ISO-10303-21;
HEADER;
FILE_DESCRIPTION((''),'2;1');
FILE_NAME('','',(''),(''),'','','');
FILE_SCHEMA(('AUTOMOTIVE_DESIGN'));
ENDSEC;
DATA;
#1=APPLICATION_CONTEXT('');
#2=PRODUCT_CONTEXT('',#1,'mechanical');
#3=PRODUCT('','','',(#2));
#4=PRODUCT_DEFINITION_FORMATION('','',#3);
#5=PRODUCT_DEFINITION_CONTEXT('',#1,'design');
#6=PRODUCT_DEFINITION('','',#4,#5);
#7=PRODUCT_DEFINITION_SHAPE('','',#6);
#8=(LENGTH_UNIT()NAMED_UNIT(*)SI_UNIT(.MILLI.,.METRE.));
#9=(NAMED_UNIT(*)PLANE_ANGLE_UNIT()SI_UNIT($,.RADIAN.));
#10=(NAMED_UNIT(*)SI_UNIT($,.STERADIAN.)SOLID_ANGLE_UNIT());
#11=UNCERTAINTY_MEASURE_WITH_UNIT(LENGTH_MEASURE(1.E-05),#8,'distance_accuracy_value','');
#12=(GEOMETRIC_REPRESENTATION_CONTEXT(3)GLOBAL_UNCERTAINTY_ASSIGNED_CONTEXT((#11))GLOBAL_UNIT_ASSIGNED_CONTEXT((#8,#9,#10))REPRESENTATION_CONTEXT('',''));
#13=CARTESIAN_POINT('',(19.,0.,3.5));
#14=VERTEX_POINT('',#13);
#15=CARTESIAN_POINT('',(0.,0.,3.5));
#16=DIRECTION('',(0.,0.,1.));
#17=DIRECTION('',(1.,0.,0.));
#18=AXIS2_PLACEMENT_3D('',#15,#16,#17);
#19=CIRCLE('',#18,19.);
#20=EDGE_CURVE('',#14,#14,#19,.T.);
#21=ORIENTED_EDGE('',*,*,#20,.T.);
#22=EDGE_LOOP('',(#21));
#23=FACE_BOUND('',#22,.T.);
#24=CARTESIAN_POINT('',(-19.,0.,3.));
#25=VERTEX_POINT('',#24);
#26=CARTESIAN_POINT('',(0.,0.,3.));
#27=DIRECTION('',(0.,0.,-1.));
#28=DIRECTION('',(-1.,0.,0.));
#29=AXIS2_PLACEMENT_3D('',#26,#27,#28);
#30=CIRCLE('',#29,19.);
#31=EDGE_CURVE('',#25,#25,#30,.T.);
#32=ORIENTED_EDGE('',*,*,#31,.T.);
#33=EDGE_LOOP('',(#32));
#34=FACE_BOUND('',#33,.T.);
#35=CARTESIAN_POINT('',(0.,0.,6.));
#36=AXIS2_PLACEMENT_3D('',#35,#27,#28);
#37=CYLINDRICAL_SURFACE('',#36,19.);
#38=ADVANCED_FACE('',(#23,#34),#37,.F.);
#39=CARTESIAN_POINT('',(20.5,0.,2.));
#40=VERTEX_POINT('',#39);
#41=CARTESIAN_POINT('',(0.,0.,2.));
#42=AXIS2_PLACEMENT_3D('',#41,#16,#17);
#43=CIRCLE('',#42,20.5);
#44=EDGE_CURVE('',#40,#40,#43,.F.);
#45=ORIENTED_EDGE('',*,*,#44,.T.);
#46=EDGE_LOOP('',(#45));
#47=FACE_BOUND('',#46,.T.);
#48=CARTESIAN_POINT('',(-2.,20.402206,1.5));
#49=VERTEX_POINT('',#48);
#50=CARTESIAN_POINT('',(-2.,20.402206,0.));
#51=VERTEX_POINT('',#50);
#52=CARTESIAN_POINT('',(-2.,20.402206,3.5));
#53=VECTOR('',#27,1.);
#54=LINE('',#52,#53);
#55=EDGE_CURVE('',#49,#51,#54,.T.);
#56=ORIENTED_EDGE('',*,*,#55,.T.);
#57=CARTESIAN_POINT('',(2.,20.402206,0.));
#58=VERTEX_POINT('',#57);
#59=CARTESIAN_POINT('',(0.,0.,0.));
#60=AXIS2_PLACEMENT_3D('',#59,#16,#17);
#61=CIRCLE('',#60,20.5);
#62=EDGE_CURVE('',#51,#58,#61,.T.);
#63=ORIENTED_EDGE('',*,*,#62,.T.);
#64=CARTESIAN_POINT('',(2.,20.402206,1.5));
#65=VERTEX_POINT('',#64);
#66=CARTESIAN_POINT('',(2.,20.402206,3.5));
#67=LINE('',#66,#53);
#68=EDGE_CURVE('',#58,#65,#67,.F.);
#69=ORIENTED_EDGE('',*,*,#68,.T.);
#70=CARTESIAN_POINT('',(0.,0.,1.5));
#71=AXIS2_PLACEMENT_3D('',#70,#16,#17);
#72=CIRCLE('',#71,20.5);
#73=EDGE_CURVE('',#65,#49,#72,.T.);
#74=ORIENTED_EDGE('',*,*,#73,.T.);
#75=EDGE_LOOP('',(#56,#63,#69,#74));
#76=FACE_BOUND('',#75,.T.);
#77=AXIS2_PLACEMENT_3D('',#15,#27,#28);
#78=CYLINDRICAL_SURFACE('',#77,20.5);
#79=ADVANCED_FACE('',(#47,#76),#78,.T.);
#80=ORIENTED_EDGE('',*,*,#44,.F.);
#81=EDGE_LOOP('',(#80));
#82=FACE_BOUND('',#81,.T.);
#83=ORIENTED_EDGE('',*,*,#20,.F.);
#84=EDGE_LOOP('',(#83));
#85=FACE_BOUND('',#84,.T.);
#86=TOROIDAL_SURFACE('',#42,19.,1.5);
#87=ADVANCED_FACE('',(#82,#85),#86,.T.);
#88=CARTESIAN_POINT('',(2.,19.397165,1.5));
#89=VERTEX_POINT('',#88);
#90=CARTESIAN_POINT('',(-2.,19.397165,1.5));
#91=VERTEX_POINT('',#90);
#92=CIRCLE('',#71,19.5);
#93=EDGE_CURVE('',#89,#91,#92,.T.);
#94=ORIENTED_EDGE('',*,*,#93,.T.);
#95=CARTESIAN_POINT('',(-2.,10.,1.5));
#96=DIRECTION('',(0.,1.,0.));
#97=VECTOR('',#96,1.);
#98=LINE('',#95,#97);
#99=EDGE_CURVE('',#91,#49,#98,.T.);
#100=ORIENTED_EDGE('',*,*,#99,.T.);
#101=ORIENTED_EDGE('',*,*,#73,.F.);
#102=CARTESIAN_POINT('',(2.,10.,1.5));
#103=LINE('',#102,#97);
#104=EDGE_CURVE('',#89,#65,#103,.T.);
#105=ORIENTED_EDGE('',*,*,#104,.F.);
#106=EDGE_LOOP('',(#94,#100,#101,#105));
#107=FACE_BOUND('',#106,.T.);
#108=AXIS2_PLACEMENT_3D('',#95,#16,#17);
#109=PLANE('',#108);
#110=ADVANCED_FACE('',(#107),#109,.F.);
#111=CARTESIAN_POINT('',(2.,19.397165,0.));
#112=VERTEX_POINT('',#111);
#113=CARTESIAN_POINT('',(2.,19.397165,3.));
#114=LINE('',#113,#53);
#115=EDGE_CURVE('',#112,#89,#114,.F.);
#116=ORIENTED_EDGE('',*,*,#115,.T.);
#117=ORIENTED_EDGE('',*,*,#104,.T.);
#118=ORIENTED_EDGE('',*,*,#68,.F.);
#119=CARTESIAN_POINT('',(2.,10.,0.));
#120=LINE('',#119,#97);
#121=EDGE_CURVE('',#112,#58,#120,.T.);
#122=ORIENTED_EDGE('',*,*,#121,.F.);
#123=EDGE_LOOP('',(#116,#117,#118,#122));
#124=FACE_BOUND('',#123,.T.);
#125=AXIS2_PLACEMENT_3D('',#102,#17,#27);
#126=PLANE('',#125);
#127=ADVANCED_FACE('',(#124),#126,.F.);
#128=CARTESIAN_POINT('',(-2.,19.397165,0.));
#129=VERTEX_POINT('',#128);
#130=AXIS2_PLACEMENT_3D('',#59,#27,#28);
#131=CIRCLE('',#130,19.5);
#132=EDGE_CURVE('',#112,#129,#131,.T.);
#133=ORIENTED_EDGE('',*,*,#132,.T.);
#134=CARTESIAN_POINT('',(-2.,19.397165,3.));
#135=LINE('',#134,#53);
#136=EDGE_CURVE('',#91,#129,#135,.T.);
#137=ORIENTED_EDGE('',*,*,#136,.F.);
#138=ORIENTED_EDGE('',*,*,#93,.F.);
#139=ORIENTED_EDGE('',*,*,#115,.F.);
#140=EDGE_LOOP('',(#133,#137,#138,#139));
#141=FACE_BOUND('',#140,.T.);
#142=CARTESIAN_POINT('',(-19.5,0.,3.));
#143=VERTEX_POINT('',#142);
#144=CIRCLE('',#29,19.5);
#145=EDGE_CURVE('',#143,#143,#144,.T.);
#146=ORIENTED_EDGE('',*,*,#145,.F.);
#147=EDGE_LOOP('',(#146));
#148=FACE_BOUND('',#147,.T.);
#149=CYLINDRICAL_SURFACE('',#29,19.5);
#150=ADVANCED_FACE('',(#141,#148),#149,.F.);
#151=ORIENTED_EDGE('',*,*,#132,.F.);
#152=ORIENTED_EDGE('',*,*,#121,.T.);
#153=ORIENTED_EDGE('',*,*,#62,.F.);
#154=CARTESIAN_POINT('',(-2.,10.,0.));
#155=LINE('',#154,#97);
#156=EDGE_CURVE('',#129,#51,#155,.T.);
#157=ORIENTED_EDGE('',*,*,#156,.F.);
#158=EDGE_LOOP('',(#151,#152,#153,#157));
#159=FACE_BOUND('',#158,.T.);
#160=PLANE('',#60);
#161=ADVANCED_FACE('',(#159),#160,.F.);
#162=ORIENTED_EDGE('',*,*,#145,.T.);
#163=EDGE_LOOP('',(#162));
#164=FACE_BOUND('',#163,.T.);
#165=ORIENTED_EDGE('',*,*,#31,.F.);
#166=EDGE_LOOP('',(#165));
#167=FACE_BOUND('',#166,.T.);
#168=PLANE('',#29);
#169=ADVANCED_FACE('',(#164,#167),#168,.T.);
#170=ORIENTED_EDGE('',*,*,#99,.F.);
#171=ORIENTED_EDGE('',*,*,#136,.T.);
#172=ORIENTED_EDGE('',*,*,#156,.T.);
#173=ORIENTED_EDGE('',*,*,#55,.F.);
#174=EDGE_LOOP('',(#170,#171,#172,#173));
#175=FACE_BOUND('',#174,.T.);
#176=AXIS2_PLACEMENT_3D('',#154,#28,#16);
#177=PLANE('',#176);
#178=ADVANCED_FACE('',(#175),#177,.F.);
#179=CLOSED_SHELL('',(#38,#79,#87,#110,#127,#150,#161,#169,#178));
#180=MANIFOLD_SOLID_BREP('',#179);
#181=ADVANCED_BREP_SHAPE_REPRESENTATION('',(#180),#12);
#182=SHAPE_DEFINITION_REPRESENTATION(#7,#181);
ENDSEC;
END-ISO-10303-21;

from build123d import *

# Parameters (mm, degrees)
CROQUIS1_R                 = 20.5
SALIENTE_EXTRUIR1_DEPTH    = 3.5
CORTAR_EXTRUIR2_DEPTH      = 3
CORTAR_EXTRUIR2_DEPTH_BACK = 10
CROQUIS3_W                 = 4
CROQUIS3_H                 = 1.5
CROQUIS4_R                 = 19.5
CORTAR_EXTRUIR3_DEPTH      = 3
CROQUIS5_R                 = 19
CORTAR_EXTRUIR4_DEPTH      = 3
REDONDEO1_R                = 1.5


with BuildPart() as part:
    # Croquis1 → Saliente-Extruir1 (new body)
    with BuildSketch(Plane.XY):
        Circle(CROQUIS1_R)
    extrude(amount=SALIENTE_EXTRUIR1_DEPTH)

    # Croquis3 → Cortar-Extruir2 (cut, two sides: drawn at the far end of the back side and taken through both)
    with BuildSketch(Plane(origin=(0, 20, 0), x_dir=(-1, 0, 0), z_dir=(0, 1, 0)).offset(-CORTAR_EXTRUIR2_DEPTH_BACK)):
        with Locations((0, 0.75)):
            Rectangle(CROQUIS3_W, CROQUIS3_H)
    extrude(amount=CORTAR_EXTRUIR2_DEPTH + CORTAR_EXTRUIR2_DEPTH_BACK, mode=Mode.SUBTRACT)

    # Croquis4 → Cortar-Extruir3 (cut)
    with BuildSketch(Plane(origin=(0, 0, 0), x_dir=(-1, 0, 0), z_dir=(0, 0, -1))):
        Circle(CROQUIS4_R)
    extrude(amount=-CORTAR_EXTRUIR3_DEPTH, mode=Mode.SUBTRACT)

    # Croquis5 → Cortar-Extruir4 (cut)
    with BuildSketch(Plane(origin=(0, 0, 3), x_dir=(-1, 0, 0), z_dir=(0, 0, -1))):
        Circle(CROQUIS5_R)
    extrude(amount=-CORTAR_EXTRUIR4_DEPTH, mode=Mode.SUBTRACT)

    # Redondeo1
    redondeo1_edges = [part.edges().sort_by_distance(p)[0] for p in [
        (-20.5, 0, 3.5),
    ]]
    fillet(redondeo1_edges, radius=REDONDEO1_R - 0.0001)  # a hair under: the kernel refuses the full size


solid = part.part
